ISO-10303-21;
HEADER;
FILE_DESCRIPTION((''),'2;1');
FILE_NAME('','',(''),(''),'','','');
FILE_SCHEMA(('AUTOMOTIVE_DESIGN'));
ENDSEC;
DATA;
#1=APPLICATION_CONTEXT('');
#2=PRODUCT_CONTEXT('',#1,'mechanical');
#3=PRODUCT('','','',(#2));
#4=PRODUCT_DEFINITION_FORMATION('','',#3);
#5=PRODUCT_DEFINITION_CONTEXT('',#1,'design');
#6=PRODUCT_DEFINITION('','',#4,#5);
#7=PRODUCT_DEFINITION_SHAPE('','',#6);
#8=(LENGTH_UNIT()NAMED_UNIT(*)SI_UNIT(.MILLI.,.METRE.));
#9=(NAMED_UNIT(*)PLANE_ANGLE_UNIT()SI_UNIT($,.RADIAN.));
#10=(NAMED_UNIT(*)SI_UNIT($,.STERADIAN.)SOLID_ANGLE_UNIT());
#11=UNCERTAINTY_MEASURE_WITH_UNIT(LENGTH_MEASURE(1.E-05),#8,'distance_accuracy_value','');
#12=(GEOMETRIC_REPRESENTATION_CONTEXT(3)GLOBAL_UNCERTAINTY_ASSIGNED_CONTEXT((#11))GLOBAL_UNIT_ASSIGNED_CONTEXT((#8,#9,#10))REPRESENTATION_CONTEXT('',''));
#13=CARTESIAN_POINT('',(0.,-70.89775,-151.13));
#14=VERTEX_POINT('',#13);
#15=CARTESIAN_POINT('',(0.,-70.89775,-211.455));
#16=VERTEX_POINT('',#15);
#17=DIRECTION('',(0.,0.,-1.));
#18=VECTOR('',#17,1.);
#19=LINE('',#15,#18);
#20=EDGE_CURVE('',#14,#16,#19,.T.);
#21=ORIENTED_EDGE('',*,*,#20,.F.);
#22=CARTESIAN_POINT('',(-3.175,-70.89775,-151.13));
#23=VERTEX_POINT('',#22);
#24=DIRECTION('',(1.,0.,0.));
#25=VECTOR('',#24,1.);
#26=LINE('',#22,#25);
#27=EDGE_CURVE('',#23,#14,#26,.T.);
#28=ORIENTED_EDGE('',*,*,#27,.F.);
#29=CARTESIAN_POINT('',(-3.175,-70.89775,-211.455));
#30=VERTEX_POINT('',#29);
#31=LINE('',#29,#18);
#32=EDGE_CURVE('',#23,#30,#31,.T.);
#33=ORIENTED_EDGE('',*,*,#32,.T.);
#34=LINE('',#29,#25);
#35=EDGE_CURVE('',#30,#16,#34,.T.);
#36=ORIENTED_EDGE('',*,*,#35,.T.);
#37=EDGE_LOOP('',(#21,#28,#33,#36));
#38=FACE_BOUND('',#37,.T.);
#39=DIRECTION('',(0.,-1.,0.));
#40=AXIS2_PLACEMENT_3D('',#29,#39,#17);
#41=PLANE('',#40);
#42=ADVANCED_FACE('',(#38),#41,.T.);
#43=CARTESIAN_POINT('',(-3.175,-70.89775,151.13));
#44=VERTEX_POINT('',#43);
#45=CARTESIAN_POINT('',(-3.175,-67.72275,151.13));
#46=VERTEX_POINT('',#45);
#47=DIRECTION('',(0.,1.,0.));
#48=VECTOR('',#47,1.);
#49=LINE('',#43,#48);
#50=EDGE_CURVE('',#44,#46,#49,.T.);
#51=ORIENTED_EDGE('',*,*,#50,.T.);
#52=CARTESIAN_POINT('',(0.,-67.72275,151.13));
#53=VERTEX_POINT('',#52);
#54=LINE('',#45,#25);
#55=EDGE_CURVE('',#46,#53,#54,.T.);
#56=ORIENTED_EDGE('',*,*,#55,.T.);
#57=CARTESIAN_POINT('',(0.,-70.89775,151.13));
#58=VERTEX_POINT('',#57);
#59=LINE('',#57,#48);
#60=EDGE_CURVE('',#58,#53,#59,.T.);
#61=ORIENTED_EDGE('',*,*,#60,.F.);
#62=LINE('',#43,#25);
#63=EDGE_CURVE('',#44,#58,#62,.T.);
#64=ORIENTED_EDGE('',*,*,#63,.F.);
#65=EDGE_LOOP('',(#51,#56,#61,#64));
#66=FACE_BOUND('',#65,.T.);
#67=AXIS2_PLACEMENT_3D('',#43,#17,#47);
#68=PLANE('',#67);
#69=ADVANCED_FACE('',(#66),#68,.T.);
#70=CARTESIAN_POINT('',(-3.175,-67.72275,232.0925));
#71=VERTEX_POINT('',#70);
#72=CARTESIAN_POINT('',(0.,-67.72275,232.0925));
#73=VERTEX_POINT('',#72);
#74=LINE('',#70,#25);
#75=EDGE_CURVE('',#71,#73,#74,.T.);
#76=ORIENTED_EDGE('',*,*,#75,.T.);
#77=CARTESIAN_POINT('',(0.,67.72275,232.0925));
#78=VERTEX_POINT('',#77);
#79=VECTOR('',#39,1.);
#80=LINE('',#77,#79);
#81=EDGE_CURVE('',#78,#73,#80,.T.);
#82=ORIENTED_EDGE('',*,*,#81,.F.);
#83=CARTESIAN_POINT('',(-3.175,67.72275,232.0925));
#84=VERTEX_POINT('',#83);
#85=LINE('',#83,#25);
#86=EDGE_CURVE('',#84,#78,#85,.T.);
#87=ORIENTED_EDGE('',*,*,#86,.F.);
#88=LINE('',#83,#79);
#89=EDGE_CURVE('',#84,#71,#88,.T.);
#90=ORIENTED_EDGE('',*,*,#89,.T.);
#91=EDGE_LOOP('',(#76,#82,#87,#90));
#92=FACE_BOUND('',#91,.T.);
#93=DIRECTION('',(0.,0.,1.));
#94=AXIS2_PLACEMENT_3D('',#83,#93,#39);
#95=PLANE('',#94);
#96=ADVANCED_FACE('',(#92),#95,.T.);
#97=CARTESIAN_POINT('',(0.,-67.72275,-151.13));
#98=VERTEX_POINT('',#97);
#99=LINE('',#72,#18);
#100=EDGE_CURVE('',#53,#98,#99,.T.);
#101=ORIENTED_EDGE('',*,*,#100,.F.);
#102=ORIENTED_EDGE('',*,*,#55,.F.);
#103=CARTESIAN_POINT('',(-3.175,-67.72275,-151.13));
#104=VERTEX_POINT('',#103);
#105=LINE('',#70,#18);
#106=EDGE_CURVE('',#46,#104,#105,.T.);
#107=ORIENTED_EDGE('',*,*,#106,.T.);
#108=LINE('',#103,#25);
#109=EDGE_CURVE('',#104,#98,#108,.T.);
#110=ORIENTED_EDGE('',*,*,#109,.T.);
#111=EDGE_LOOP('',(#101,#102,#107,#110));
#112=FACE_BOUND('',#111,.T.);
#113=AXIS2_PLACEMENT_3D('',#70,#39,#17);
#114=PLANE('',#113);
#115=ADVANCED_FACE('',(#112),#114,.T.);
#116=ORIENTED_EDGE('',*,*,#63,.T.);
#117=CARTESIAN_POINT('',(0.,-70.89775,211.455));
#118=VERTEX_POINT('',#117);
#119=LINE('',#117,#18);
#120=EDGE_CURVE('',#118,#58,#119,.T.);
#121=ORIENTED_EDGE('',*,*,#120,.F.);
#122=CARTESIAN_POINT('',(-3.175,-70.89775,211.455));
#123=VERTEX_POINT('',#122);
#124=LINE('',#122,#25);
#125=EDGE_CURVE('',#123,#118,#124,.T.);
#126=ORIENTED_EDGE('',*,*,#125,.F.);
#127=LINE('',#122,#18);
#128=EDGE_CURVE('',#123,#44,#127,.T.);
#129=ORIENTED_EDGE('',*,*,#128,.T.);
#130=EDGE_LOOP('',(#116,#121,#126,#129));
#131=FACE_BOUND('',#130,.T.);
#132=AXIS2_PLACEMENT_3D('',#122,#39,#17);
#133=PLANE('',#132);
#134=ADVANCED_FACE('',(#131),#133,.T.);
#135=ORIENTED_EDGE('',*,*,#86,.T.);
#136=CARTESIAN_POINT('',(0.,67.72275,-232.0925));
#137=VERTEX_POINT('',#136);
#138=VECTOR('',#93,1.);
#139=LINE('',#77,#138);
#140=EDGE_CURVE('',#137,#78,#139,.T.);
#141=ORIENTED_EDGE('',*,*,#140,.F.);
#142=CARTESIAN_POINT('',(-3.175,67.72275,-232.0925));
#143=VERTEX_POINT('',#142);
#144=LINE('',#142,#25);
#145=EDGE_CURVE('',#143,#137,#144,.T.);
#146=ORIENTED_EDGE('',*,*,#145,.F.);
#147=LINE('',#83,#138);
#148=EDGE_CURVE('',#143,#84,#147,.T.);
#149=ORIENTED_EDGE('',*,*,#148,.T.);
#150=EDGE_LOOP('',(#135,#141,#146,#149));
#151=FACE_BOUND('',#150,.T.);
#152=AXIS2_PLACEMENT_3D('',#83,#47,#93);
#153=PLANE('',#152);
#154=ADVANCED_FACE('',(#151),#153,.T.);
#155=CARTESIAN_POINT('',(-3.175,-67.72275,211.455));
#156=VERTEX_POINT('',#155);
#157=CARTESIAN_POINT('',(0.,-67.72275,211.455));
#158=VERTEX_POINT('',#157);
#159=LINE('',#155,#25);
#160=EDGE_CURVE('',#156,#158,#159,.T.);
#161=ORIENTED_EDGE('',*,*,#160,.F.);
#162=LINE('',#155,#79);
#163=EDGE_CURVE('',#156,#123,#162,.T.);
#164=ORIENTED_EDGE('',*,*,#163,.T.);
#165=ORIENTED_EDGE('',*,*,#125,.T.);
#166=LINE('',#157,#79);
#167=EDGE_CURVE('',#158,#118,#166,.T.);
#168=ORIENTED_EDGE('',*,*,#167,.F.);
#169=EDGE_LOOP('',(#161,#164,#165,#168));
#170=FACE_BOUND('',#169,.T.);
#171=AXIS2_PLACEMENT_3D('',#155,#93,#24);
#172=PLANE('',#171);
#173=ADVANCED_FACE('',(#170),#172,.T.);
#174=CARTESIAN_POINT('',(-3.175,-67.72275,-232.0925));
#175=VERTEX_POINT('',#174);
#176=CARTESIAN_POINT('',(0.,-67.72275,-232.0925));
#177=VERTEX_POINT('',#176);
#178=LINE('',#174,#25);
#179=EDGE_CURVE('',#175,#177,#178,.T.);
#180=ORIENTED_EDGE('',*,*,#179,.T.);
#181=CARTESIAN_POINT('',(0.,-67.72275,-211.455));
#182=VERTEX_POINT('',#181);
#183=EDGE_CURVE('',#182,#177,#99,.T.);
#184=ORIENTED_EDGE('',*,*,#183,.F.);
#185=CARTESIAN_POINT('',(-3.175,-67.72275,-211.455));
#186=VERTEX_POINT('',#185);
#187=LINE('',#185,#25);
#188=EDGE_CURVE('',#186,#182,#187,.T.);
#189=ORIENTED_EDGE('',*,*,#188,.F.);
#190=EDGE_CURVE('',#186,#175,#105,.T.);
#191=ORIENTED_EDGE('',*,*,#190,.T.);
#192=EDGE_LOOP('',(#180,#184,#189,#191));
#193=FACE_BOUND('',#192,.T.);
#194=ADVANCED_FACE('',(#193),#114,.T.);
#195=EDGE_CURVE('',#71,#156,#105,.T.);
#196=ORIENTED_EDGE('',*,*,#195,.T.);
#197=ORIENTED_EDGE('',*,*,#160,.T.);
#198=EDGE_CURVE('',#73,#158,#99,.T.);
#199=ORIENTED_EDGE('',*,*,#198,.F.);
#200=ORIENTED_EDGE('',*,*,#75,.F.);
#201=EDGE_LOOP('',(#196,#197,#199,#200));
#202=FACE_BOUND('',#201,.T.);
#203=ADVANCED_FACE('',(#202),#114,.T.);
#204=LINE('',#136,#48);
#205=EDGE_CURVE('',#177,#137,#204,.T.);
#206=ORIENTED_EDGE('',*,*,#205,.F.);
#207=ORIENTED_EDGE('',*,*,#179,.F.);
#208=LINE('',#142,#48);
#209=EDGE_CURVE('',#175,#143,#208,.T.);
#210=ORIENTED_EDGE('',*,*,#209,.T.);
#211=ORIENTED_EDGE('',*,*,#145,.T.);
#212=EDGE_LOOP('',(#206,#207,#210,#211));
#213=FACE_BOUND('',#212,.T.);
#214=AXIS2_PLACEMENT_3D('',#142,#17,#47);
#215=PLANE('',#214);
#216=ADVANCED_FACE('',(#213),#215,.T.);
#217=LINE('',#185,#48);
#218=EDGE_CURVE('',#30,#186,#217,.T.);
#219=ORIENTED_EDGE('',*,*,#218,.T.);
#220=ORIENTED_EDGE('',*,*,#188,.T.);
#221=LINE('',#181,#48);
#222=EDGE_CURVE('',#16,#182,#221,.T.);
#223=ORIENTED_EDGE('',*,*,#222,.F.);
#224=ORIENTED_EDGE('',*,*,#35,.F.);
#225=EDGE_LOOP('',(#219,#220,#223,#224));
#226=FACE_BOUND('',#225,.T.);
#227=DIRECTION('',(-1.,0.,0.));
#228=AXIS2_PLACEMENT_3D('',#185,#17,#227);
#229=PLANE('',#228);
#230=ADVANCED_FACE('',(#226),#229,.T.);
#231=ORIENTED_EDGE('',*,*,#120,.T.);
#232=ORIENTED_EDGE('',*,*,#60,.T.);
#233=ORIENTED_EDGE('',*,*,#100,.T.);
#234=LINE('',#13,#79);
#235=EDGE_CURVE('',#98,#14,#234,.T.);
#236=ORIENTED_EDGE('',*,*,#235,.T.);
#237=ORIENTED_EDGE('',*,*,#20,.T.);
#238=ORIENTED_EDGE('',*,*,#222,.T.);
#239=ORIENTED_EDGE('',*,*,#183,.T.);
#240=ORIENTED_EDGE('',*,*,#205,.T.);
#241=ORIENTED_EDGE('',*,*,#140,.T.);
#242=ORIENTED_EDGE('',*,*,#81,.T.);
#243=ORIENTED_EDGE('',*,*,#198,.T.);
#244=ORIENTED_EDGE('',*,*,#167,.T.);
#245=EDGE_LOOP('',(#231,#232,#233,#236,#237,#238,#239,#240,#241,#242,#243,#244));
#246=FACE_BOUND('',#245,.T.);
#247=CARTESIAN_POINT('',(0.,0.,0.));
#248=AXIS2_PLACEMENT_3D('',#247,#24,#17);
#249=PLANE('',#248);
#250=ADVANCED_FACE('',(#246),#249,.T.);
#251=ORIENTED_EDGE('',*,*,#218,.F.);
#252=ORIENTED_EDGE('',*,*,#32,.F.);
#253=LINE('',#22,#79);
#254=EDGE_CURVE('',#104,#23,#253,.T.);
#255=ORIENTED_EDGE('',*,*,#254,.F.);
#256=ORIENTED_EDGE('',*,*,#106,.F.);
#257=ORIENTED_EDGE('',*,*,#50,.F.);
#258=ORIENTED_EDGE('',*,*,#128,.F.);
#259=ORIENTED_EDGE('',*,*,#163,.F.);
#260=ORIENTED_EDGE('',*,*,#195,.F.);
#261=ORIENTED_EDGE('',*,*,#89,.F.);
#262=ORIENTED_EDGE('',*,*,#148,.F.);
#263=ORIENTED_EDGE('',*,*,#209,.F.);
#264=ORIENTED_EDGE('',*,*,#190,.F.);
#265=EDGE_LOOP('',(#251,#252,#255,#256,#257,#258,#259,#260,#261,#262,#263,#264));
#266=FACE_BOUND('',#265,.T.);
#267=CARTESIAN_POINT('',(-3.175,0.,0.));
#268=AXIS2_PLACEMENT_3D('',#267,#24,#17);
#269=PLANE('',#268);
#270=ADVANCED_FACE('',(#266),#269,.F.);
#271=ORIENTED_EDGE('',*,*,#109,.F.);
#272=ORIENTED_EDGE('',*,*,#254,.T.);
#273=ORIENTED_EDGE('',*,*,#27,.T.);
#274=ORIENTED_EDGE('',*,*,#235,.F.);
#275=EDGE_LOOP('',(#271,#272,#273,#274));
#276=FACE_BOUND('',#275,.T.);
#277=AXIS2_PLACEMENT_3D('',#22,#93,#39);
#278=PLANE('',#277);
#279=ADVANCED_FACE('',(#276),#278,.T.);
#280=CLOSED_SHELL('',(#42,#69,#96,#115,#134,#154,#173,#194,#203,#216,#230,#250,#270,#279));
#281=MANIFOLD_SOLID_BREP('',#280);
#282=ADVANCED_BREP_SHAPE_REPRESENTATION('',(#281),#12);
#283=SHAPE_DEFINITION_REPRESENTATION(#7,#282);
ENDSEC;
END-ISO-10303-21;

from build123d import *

# Parameters (mm, degrees)
SKETCH1_W           = 464.185
SKETCH1_H           = 135.4455
BASE_FLANGE1_DEPTH  = 3.175
SKETCH2_W           = 60.325
SKETCH2_H           = 3.175
BOSS_EXTRUDE2_DEPTH = 3.175


# Sheet-metal steps are written as plain solids
with BuildPart() as part:
    # Sketch1 → Base-Flange1 (new body)
    with BuildSketch(Plane(origin=(0, 0, 0), x_dir=(0, 0, -1), z_dir=(1, 0, 0))):
        Rectangle(SKETCH1_W, SKETCH1_H)
    extrude(amount=-BASE_FLANGE1_DEPTH)

    # Sketch2 → Boss-Extrude2 (add)
    with BuildSketch(Plane(origin=(0, 0, 0), x_dir=(0, 0, -1), z_dir=(1, 0, 0))):
        with Locations((-181.2925, -69.31025)):
            Rectangle(SKETCH2_W, SKETCH2_H)
        with Locations((181.2925, -69.31025)):
            Rectangle(SKETCH2_W, SKETCH2_H)
    extrude(amount=-BOSS_EXTRUDE2_DEPTH)


solid = part.part
